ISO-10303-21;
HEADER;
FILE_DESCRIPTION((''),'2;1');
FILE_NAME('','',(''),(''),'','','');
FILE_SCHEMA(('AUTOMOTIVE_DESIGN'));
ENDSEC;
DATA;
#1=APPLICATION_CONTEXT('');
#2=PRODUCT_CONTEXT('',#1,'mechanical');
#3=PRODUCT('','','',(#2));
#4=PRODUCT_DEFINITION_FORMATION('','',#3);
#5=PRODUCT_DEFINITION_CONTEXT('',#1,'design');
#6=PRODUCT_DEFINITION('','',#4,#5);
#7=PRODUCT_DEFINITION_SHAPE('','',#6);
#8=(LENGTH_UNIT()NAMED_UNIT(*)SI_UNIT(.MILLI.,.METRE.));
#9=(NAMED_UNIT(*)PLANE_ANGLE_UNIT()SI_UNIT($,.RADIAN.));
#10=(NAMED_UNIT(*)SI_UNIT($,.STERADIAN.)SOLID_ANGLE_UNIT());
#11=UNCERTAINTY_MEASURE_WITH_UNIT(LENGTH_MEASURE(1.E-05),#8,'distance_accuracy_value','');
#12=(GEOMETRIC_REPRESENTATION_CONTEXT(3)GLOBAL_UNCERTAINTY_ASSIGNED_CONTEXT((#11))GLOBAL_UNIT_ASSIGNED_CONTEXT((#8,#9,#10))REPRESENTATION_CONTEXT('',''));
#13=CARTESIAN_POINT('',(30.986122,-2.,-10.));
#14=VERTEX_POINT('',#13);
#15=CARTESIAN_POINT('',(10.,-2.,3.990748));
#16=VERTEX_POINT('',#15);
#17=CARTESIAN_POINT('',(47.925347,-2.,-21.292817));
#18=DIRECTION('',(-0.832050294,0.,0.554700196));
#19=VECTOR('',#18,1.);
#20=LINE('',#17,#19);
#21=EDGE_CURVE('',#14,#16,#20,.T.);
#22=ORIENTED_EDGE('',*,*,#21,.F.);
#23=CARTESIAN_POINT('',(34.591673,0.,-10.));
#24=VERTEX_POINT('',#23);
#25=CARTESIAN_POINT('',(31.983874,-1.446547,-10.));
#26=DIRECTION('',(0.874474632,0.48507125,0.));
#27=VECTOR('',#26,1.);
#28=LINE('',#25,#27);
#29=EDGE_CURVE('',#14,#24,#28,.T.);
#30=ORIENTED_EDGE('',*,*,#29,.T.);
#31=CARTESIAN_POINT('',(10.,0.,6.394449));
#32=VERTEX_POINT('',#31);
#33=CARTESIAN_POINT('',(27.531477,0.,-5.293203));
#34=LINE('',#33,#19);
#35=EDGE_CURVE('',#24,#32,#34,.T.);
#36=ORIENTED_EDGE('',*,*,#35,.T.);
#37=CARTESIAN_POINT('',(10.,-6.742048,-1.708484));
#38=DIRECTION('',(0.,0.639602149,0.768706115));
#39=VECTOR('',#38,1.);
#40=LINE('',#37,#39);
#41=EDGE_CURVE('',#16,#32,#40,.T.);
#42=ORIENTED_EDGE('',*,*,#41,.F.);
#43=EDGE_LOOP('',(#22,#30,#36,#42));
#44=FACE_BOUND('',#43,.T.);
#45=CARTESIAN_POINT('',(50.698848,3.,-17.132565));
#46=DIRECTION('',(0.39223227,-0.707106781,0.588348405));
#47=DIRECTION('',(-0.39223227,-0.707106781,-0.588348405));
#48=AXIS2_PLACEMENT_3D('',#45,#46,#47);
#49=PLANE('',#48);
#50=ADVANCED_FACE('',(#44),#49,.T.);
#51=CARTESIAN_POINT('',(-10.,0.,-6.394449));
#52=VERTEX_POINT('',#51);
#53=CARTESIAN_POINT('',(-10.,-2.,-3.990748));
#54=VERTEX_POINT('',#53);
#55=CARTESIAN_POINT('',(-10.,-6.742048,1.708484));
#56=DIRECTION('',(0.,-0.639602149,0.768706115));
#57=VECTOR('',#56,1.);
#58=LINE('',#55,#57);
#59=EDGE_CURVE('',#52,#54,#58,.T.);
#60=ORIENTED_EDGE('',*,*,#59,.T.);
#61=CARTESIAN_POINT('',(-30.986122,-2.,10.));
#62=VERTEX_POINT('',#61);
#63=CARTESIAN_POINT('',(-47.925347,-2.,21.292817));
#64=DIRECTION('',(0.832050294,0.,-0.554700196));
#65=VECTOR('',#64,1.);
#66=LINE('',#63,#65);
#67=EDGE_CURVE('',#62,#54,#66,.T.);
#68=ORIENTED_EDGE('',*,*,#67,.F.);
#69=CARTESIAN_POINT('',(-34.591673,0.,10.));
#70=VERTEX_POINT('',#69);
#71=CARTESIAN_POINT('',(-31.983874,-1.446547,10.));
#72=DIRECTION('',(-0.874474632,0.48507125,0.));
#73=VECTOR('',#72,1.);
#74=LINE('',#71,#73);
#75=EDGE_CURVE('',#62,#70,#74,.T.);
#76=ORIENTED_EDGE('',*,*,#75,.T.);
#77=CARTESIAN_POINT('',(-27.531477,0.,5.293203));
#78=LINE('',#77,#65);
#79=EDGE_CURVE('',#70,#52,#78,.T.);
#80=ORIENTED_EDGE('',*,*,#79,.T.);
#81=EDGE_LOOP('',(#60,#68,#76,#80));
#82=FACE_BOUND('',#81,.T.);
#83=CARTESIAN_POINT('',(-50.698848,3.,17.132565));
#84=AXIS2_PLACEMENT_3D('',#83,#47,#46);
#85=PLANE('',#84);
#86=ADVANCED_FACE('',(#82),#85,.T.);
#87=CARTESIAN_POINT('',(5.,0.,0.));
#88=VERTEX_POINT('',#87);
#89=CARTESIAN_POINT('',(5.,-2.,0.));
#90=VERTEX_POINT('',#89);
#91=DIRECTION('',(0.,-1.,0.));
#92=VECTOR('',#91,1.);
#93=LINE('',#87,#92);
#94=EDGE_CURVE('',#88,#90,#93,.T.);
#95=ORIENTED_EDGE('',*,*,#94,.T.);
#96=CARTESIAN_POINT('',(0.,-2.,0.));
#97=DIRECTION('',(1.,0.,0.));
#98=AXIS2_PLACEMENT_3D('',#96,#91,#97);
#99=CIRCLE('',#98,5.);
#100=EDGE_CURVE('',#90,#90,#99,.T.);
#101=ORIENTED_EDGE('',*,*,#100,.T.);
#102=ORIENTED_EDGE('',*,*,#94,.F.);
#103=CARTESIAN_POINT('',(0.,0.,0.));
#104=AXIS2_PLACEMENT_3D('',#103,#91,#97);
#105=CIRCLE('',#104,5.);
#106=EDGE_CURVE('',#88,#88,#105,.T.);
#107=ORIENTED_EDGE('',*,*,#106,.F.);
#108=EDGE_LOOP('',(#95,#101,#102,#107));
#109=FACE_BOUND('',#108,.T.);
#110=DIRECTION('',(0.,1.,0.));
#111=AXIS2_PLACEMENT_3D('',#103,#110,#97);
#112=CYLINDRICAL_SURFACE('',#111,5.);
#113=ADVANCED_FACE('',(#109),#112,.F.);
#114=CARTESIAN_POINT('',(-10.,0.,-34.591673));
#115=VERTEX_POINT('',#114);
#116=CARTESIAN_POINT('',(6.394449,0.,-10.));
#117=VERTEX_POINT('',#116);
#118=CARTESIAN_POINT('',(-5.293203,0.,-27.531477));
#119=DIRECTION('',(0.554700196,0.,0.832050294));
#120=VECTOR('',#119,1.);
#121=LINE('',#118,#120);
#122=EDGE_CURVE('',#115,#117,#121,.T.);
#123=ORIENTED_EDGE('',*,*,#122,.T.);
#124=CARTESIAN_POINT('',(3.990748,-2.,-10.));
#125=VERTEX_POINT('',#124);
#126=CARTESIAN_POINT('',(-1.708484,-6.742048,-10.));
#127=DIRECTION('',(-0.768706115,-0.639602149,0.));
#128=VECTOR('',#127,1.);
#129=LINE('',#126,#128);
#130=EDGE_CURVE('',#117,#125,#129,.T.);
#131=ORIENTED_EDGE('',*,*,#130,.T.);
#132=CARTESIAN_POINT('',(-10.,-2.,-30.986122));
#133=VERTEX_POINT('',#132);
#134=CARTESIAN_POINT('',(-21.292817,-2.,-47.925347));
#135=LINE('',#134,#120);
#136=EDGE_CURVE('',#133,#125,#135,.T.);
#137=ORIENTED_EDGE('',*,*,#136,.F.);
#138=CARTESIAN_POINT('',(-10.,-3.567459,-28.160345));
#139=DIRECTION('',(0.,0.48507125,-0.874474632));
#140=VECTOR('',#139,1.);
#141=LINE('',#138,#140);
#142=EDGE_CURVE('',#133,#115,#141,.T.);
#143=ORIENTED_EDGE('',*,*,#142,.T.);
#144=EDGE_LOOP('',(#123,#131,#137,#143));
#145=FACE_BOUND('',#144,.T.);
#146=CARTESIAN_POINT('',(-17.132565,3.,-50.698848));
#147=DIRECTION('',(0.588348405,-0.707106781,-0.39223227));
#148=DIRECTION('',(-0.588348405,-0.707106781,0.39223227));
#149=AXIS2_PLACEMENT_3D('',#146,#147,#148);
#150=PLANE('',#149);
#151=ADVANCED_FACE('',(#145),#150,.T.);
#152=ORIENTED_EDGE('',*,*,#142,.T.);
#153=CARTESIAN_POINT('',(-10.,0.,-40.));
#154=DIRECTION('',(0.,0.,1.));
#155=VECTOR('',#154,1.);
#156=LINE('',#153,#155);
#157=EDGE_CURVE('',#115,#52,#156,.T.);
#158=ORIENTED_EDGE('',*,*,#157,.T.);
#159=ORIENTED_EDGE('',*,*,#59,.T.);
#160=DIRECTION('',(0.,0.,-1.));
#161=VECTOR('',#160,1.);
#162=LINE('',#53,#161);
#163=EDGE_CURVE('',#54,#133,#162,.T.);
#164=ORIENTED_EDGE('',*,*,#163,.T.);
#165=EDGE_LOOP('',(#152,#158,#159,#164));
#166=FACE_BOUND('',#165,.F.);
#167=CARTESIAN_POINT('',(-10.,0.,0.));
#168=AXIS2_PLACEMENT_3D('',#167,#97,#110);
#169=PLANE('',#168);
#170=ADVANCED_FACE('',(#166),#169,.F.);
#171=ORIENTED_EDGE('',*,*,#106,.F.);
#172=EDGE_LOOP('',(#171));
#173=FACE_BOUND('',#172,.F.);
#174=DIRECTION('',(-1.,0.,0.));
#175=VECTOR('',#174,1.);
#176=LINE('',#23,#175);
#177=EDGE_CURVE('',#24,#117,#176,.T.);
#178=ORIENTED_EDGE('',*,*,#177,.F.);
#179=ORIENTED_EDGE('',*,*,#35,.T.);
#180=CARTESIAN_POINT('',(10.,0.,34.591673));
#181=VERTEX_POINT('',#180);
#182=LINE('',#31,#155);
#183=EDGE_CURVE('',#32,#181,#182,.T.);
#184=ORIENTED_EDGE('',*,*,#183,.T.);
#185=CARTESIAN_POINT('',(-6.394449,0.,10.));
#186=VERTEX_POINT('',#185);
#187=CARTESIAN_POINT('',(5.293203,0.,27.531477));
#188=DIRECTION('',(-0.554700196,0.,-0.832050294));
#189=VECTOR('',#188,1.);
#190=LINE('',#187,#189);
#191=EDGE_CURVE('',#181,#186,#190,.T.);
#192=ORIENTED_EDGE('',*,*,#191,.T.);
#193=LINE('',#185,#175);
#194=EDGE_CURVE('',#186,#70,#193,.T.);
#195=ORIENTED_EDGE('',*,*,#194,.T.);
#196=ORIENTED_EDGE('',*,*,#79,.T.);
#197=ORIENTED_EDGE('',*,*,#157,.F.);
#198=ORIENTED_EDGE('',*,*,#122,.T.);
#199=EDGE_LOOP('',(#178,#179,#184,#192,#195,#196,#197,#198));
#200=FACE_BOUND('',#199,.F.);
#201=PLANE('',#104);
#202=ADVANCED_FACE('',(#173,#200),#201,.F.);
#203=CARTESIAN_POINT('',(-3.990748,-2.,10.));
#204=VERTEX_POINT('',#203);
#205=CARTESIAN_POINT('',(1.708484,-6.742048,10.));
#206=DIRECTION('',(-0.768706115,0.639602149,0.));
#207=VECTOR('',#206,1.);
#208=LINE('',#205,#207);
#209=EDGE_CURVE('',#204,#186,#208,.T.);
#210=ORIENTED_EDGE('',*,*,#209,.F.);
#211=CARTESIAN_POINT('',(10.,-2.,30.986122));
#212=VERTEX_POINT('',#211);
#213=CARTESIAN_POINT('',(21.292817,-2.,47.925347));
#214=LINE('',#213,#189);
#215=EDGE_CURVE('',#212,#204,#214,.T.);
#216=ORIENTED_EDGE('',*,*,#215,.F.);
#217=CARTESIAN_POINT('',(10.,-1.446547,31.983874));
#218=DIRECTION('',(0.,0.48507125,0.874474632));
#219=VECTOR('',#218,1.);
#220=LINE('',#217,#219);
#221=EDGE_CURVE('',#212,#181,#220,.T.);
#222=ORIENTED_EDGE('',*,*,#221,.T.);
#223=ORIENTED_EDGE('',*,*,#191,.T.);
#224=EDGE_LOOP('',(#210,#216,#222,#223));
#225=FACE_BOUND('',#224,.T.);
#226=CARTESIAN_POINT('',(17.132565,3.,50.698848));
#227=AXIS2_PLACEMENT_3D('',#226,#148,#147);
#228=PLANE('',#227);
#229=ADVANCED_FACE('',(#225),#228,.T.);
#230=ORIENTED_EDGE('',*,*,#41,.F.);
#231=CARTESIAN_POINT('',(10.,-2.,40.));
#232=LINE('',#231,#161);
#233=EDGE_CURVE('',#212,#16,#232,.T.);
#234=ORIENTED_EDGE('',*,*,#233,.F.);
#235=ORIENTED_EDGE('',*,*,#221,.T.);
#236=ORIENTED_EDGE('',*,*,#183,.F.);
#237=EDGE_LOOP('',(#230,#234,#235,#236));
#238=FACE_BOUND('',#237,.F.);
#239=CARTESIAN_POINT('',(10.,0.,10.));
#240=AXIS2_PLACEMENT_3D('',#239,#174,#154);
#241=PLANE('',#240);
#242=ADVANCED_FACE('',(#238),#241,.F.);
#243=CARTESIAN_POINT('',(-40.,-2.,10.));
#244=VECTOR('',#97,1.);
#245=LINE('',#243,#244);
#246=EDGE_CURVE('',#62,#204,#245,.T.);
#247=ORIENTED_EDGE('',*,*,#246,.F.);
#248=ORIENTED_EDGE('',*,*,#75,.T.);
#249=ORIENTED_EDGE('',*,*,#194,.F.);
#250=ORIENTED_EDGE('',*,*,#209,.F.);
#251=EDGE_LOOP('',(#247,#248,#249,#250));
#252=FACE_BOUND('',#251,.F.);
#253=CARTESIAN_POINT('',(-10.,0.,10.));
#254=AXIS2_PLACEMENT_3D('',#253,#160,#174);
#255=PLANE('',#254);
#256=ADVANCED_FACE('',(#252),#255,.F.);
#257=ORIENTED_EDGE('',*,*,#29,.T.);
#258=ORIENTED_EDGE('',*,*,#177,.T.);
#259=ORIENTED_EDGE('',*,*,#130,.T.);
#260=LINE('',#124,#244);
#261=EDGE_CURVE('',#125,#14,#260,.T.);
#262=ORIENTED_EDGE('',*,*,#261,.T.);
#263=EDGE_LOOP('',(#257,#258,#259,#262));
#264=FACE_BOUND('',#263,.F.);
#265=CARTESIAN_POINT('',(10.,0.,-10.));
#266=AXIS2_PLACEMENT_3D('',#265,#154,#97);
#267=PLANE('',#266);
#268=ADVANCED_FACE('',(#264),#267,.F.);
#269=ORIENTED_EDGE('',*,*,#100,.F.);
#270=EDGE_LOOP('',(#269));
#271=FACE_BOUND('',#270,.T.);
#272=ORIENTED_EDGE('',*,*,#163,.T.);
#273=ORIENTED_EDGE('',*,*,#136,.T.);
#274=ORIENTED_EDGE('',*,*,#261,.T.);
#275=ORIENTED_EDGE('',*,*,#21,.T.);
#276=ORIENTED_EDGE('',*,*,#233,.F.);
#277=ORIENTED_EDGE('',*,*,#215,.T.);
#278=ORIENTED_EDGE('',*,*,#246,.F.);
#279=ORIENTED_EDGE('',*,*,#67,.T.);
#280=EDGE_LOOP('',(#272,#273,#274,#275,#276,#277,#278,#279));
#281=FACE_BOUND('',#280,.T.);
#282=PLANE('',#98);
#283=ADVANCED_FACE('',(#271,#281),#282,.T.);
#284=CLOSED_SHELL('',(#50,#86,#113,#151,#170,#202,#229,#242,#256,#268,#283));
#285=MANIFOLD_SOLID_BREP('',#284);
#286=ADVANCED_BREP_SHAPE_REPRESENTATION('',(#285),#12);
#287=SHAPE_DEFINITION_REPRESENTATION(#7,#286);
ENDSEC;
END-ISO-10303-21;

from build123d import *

# Parameters (mm, degrees)
F0_R         = 5
F1_DEPTH     = 2
F2_T4_DEPTH  = 61.7723426343
F2_T9_DEPTH  = 61.7723426343
F2_T14_DEPTH = 61.7723426343
F2_T19_DEPTH = 61.7723426343


# Not quite as in the source:
# - a fillet or chamfer that OpenCascade refuses, or shapes differently, is made with other operations: its cross-section is extruded or revolved along the edge and cut away or added


with BuildPart() as f1:
    # F0 (on Front) → F1 (new body)
    with BuildSketch(Plane.XZ):
        Polygon((10, 40), (-10, 10), (-40, 10), (-10, -10), (-10, -40), (10, -10), (40, -10), (10, 10), align=None)
        Circle(F0_R, mode=Mode.SUBTRACT)
    extrude(amount=F1_DEPTH)

    # F2: chamfer of 5 on 4 edges, made by hand


with BuildPart() as f2_tool2:
    # F2_s3 → F2_t4 (new body)
    with BuildSketch(Plane(origin=(43.0065402431, 0, -28.6710268287), x_dir=(0, 1, 0), z_dir=(-0.8320502943, 0, 0.5547001962))):
        Polygon((3, -13.8675049056), (-2, -8.8675049056), (-2, -13.8675049056), align=None)
    extrude(amount=F2_T4_DEPTH)

    split(bisect_by=Plane.YZ.offset(10), keep=Keep.TOP)


with BuildPart() as f1_1:
    add(f1.part)

    # F2_t1: cut F2_tool2
    add(f2_tool2.part, mode=Mode.SUBTRACT)


with BuildPart() as f2_tool7:
    # F2_s8 → F2_t9 (new body)
    with BuildSketch(Plane(origin=(28.6710268287, 0, 43.0065402431), x_dir=(0, 1, 0), z_dir=(-0.5547001962, 0, -0.8320502943))):
        Polygon((3, -13.8675049056), (-2, -8.8675049056), (-2, -13.8675049056), align=None)
    extrude(amount=F2_T9_DEPTH)

    split(bisect_by=Plane.XY.offset(10), keep=Keep.TOP)


with BuildPart() as f1_2:
    add(f1_1.part)

    # F2_t6: cut F2_tool7
    add(f2_tool7.part, mode=Mode.SUBTRACT)


with BuildPart() as f2_tool12:
    # F2_s13 → F2_t14 (new body)
    with BuildSketch(Plane(origin=(-43.0065402431, 0, 28.6710268287), x_dir=(0, 1, 0), z_dir=(0.8320502943, 0, -0.5547001962))):
        Polygon((3, -13.8675049056), (-2, -8.8675049056), (-2, -13.8675049056), align=None)
    extrude(amount=F2_T14_DEPTH)

    split(bisect_by=Plane.YZ.offset(-10), keep=Keep.BOTTOM)


with BuildPart() as f1_3:
    add(f1_2.part)

    # F2_t11: cut F2_tool12
    add(f2_tool12.part, mode=Mode.SUBTRACT)


with BuildPart() as f2_tool17:
    # F2_s18 → F2_t19 (new body)
    with BuildSketch(Plane(origin=(-28.6710268287, 0, -43.0065402431), x_dir=(0, 1, 0), z_dir=(0.5547001962, 0, 0.8320502943))):
        Polygon((3, -13.8675049056), (-2, -8.8675049056), (-2, -13.8675049056), align=None)
    extrude(amount=F2_T19_DEPTH)

    split(bisect_by=Plane.XY.offset(-10), keep=Keep.BOTTOM)


with BuildPart() as f1_4:
    add(f1_3.part)

    # F2_t16: cut F2_tool17
    add(f2_tool17.part, mode=Mode.SUBTRACT)


solid = f1_4.part
